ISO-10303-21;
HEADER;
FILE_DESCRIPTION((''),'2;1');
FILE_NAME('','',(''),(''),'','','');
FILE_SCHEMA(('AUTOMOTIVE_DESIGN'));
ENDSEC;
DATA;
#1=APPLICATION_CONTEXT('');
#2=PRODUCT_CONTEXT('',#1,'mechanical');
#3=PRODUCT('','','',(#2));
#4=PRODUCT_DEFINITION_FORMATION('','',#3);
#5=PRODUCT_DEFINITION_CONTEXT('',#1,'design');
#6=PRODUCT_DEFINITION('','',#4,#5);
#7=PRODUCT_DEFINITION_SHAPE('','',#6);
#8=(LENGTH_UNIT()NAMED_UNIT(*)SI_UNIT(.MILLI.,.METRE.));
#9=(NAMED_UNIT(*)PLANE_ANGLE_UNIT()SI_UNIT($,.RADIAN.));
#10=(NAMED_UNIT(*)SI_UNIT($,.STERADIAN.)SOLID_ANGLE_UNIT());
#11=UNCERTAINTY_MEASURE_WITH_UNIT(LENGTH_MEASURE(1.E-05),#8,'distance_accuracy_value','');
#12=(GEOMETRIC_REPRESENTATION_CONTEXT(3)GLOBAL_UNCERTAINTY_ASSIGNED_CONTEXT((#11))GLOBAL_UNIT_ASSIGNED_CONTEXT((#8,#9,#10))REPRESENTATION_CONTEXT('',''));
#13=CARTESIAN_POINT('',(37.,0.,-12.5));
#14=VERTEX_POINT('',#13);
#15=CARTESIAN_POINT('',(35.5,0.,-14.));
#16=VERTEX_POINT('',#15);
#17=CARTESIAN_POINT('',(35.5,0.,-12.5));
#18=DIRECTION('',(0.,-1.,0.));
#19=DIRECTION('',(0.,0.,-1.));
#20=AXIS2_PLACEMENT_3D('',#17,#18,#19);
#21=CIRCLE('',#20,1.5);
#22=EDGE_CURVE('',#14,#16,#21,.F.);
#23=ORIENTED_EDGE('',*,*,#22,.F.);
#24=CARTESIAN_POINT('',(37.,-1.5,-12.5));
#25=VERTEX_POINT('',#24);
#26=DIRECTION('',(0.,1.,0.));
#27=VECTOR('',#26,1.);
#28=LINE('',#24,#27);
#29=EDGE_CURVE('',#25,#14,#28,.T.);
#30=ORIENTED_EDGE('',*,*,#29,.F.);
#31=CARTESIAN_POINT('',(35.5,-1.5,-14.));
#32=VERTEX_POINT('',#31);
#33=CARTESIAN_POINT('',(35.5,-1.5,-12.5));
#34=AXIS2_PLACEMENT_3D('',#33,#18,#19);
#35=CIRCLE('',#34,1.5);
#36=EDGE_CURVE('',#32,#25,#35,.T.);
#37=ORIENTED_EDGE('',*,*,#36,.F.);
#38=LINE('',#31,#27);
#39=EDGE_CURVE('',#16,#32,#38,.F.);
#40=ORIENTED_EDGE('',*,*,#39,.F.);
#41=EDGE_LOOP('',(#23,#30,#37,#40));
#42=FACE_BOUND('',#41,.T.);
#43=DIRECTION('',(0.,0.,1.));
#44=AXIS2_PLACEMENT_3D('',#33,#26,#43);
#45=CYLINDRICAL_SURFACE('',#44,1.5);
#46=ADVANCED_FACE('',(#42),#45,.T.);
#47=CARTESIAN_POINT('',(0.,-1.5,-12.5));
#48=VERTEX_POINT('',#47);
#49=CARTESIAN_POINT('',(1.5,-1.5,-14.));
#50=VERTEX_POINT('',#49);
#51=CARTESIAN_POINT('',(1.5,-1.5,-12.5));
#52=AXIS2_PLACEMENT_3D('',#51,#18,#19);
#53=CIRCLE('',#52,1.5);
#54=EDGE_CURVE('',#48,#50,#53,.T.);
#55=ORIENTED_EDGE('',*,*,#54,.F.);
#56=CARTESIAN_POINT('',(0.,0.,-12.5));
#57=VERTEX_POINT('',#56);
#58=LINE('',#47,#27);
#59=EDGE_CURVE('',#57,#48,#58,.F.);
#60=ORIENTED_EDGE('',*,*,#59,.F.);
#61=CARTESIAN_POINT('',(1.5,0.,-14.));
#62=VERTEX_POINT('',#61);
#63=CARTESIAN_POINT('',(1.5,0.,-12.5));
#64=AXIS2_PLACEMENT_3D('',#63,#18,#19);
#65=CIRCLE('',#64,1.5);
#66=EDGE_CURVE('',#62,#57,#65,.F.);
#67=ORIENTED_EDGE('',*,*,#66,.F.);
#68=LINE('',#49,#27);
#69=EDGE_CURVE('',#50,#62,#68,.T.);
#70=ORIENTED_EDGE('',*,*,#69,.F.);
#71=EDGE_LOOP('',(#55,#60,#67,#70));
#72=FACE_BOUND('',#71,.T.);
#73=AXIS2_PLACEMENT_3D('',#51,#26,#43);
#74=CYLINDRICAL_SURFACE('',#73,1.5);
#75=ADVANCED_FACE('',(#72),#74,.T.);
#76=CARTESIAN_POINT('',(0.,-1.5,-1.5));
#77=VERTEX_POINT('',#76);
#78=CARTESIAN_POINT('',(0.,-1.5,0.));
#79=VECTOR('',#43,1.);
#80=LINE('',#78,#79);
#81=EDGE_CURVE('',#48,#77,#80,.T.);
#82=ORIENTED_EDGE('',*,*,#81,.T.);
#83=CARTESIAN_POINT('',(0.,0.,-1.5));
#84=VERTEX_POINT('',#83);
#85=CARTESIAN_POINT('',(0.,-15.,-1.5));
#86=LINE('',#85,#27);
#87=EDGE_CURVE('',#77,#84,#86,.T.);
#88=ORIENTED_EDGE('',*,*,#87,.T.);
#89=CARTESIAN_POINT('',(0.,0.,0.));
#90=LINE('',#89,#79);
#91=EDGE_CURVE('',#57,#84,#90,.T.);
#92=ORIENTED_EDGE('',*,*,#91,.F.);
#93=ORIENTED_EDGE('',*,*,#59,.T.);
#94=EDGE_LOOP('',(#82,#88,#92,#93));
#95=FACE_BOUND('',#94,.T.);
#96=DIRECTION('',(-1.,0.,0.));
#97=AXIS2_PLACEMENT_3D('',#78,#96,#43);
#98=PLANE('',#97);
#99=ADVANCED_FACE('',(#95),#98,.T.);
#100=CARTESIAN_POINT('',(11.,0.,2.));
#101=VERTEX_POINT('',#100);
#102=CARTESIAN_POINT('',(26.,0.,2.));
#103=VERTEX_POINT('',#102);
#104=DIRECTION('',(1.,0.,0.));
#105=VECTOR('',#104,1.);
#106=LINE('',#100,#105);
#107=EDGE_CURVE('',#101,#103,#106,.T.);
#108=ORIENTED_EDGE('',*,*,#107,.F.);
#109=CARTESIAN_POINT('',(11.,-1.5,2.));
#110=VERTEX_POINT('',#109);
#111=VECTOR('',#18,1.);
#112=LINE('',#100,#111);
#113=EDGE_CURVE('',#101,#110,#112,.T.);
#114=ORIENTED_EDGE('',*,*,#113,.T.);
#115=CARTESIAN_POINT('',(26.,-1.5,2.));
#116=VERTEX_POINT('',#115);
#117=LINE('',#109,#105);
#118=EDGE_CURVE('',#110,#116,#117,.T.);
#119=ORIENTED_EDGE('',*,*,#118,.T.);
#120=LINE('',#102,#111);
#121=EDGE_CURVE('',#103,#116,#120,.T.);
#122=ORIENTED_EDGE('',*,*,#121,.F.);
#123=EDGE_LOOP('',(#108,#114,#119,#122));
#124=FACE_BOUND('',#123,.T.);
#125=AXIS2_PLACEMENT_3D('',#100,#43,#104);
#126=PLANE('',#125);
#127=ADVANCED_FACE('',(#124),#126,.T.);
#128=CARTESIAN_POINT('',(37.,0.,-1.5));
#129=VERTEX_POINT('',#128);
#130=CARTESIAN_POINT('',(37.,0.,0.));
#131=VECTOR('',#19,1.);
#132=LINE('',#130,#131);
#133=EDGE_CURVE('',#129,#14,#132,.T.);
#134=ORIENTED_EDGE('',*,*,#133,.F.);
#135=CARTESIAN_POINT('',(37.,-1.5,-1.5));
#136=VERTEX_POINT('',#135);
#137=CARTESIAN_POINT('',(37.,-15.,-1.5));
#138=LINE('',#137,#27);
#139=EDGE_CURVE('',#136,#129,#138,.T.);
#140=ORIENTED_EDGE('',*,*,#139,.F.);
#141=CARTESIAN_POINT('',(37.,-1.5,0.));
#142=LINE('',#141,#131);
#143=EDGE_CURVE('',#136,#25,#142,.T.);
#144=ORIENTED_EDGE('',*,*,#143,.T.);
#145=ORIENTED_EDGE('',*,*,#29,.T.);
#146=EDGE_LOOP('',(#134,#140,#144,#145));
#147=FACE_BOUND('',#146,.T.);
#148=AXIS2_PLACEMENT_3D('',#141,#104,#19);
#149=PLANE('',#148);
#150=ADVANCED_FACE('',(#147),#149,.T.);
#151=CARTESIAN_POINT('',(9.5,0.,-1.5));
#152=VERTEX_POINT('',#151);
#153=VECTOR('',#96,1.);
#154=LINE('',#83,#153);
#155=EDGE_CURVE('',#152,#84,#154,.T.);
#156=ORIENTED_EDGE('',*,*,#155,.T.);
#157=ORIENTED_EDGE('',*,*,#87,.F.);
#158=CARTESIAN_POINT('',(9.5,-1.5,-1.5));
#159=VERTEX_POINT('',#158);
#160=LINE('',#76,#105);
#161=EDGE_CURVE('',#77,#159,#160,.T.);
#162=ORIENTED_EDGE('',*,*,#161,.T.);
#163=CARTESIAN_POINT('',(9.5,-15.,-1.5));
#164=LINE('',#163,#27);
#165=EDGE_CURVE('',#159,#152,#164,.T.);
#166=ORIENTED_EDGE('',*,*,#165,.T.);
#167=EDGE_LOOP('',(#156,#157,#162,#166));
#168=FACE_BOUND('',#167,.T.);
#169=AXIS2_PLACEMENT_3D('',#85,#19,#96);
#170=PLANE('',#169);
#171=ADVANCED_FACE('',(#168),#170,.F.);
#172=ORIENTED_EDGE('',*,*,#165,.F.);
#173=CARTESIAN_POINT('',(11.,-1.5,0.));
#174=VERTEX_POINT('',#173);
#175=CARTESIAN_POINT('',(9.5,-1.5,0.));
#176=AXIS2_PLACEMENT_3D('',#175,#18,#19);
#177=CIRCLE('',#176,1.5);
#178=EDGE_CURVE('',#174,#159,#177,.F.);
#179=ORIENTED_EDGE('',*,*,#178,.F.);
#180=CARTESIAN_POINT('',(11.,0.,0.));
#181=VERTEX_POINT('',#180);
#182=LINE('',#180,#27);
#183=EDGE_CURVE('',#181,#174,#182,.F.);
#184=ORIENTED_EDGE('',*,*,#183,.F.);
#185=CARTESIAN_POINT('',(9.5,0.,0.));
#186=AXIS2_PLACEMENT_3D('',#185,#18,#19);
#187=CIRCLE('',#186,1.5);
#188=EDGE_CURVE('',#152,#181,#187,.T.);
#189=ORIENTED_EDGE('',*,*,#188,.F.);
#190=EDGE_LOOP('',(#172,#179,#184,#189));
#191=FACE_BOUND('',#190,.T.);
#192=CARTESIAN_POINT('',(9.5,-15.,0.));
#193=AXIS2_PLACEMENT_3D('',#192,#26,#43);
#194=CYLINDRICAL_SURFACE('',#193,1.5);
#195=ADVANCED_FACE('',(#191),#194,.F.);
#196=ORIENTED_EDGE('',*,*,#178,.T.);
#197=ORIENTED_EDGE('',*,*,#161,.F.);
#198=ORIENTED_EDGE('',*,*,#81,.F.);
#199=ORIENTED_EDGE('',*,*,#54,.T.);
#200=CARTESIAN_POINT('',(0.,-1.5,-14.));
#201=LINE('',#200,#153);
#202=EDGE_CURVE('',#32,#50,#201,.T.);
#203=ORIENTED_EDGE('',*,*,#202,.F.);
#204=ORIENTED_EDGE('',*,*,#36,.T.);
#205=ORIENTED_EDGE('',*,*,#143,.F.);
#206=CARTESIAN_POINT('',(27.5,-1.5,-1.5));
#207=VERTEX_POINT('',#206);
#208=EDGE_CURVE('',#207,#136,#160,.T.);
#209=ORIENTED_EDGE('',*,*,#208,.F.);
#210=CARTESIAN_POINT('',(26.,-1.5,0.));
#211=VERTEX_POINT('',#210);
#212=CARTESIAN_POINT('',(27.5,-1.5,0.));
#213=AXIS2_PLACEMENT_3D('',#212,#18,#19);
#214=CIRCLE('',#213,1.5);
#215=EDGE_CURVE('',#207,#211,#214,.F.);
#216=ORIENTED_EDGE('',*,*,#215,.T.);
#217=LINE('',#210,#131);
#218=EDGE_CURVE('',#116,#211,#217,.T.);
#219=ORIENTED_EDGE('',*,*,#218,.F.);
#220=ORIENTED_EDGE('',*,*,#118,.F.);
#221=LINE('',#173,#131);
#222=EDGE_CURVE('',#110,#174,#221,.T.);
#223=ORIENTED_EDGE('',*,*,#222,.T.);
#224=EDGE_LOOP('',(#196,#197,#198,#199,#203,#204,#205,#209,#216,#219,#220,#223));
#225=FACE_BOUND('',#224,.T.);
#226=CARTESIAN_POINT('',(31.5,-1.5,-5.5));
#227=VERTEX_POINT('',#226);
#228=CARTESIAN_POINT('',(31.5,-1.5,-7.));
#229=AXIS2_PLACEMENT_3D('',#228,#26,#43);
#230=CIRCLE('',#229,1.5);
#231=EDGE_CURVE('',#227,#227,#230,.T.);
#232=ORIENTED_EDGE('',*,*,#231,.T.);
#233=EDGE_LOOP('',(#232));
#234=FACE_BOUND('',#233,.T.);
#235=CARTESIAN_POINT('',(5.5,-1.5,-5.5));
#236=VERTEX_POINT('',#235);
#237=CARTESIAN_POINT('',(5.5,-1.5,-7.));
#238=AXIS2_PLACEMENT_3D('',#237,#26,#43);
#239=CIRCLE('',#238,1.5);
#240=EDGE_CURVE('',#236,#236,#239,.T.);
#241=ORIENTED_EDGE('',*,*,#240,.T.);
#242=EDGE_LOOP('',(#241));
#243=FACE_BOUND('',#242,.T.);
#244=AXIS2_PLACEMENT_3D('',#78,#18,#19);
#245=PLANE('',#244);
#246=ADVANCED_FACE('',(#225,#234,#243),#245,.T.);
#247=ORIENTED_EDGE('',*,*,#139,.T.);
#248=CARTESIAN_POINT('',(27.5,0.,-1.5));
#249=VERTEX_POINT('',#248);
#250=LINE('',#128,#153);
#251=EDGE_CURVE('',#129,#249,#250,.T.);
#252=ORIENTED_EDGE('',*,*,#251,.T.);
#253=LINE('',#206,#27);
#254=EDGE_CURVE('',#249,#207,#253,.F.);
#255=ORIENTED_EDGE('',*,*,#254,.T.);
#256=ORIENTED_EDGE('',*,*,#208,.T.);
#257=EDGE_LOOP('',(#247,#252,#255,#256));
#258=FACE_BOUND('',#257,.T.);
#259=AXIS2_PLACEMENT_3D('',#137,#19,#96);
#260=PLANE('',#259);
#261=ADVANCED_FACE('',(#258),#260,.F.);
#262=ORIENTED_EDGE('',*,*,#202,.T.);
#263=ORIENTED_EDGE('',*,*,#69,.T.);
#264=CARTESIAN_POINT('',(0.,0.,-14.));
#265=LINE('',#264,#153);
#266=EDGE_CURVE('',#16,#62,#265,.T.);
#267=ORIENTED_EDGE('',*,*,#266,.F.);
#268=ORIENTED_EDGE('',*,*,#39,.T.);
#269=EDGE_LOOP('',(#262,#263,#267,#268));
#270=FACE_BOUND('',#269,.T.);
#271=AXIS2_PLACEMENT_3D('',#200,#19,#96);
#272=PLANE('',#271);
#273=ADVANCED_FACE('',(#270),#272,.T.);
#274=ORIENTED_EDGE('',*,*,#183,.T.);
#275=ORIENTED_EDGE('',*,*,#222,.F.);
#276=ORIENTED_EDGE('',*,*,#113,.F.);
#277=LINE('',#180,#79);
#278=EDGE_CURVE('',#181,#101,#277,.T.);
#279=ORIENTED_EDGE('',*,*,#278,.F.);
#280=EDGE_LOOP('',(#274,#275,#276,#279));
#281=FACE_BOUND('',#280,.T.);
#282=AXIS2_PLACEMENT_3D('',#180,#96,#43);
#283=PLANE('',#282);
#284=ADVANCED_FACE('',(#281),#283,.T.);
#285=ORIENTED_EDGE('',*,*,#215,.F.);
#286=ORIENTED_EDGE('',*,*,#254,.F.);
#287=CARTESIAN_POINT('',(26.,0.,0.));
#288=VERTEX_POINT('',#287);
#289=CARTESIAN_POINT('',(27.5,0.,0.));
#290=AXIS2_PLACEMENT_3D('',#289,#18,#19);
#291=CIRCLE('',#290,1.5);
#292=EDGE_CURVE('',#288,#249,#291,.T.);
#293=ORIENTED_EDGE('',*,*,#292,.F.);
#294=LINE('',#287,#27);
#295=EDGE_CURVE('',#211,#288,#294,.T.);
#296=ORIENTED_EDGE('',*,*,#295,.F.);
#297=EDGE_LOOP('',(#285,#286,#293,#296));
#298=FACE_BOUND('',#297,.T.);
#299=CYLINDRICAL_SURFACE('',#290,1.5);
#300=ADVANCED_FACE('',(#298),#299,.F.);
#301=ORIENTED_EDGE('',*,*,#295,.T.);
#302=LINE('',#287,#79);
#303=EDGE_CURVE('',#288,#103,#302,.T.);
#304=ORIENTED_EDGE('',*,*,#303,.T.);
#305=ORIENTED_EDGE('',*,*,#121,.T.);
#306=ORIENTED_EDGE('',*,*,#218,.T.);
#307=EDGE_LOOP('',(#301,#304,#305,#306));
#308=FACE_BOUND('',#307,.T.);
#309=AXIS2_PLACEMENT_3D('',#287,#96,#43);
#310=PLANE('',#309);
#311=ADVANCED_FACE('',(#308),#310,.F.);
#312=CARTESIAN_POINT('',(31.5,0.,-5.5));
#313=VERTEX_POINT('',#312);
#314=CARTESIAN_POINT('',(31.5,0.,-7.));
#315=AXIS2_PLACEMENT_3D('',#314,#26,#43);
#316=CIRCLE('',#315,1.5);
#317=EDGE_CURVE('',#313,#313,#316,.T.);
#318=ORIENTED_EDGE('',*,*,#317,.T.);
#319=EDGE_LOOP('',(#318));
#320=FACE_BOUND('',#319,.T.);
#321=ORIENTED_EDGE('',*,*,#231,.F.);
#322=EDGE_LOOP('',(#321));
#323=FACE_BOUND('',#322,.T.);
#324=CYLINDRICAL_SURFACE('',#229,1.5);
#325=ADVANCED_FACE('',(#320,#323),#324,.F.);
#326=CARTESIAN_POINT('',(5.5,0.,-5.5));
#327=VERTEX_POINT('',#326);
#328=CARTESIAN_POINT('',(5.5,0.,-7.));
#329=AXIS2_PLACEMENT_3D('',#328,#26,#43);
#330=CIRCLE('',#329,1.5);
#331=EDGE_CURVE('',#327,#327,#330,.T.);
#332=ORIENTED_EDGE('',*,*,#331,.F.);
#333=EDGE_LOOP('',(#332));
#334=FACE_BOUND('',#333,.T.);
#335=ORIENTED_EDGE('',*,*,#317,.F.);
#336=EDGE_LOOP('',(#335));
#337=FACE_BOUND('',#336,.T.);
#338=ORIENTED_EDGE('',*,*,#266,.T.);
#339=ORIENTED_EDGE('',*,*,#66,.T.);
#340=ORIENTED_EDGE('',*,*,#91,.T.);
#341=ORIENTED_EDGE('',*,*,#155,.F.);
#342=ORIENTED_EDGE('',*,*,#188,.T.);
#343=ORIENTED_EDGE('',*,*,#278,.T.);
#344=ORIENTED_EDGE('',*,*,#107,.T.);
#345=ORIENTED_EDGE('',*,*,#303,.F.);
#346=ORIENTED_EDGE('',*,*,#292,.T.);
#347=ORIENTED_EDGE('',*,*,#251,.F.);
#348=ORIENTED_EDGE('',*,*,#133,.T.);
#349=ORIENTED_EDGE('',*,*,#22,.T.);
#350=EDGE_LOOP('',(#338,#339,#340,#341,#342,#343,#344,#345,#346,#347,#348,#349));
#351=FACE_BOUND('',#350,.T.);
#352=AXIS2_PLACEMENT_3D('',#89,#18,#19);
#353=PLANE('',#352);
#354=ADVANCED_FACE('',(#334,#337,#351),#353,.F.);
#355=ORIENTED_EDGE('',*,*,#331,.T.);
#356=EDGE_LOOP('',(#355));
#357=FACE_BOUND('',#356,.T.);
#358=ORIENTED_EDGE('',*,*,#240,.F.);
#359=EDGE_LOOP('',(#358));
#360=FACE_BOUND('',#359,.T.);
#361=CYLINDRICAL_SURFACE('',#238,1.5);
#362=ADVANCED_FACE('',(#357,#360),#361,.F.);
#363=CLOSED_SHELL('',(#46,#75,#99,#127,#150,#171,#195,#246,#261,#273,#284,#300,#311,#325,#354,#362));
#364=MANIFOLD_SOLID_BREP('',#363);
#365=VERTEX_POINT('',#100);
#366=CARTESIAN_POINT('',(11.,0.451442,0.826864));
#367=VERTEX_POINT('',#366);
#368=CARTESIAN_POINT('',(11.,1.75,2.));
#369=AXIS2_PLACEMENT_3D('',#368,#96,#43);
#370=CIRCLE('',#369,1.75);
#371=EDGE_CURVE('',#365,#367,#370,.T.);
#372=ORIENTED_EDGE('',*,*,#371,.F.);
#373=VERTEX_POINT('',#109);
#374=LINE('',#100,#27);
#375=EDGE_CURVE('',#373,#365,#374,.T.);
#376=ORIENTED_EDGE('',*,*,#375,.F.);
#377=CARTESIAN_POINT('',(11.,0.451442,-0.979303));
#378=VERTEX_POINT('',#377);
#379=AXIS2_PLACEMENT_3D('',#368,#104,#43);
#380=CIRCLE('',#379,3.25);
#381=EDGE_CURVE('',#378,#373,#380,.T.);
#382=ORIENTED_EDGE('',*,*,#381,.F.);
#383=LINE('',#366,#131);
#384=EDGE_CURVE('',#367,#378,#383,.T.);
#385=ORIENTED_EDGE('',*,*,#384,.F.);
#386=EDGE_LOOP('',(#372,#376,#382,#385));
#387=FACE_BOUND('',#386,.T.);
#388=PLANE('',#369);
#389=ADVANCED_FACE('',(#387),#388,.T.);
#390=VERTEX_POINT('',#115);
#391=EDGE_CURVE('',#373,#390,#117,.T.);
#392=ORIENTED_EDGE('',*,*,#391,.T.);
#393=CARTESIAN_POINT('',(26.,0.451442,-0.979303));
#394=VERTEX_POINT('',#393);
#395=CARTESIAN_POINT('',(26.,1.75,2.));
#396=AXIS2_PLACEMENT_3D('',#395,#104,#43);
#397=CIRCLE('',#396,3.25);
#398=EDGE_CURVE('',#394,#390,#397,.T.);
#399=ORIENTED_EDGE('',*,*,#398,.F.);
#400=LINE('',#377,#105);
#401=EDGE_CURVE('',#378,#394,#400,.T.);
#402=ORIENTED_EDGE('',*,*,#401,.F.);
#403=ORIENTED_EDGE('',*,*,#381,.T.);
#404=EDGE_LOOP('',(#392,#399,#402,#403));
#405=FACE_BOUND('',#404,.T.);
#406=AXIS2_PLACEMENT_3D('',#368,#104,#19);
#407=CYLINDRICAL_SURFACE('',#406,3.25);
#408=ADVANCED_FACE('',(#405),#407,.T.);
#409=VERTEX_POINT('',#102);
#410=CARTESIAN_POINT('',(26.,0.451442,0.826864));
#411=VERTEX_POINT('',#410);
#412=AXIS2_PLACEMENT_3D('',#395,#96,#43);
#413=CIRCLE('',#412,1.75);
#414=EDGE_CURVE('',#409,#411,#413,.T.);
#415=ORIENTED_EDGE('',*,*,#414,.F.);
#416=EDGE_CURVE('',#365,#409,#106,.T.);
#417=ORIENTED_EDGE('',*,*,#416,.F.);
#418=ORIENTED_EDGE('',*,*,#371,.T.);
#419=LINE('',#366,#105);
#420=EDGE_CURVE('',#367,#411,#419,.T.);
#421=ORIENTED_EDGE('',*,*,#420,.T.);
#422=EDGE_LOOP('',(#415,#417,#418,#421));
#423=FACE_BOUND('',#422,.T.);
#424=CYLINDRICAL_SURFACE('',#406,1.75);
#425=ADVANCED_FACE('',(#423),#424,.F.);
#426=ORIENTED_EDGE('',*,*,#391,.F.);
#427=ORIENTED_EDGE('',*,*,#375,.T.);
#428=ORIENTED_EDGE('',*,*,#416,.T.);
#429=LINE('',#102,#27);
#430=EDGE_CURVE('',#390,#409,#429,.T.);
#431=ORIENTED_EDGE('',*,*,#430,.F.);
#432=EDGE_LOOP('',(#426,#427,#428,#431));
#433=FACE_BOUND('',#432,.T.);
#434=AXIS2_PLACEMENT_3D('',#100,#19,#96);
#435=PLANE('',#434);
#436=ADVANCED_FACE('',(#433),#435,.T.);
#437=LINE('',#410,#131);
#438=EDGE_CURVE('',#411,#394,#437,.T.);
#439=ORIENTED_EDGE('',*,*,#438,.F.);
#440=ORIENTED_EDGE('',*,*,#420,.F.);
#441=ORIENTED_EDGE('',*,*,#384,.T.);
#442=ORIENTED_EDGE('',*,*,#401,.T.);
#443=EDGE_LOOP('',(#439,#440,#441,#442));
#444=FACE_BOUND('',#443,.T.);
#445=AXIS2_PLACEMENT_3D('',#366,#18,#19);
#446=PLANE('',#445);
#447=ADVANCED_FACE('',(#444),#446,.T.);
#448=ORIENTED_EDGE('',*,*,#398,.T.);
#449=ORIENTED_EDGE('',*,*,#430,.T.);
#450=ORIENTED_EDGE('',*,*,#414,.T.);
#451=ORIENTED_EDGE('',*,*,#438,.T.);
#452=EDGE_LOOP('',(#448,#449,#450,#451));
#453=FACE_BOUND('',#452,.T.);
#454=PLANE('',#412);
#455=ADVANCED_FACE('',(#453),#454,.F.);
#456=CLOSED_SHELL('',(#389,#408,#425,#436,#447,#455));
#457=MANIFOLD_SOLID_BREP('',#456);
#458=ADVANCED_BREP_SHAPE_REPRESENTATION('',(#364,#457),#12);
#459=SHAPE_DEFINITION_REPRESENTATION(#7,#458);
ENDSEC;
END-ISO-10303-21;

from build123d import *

# Parameters (mm, degrees)
SKETCH_1_W             = 37
SKETCH_1_H             = 14
SKETCH_1_R             = 1.5
SM_BASE_FLANGE_1_DEPTH = 1.5
SKETCH_7_W             = 2
SKETCH_7_H             = 1.5
EXTRUDE_1_DEPTH        = 15
SM_BASE_FLANGE_2_DEPTH = 15
SKETCH_11_W            = 11
SKETCH_11_H            = 1.5
CUT_EXTRUDE_1_DEPTH    = 15
FILLET_1_R             = 1.5
FILLET_2_R             = 1.5


# Sheet-metal steps are written as plain solids
with BuildPart() as part:
    # Sketch 1 → 基体-法兰1 (new body)
    with BuildSketch(Plane(origin=(0, 0, 0), x_dir=(1, 0, 0), z_dir=(0, 1, 0))):
        with Locations((18.5, 7)):
            Rectangle(SKETCH_1_W, SKETCH_1_H)
        with Locations(Location((5.5, 7, 0), (0, 0, 270))):
            Circle(SKETCH_1_R, mode=Mode.SUBTRACT)
        with Locations(Location((31.5, 7, 0), (0, 0, 270))):
            Circle(SKETCH_1_R, mode=Mode.SUBTRACT)
    extrude(amount=-SM_BASE_FLANGE_1_DEPTH)

    # 草图7 → 凸台-拉伸1 (add)
    with BuildSketch(Plane(origin=(26, 0, 0), x_dir=(0, 0, -1), z_dir=(1, 0, 0))):
        with Locations((-1, -0.75)):
            Rectangle(SKETCH_7_W, SKETCH_7_H)
    extrude(amount=-EXTRUDE_1_DEPTH)

    # 草图11 → 切除-拉伸1 (cut)
    with BuildSketch(Plane(origin=(0, 0, 0), x_dir=(1, 0, 0), z_dir=(0, 1, 0))):
        with Locations((5.5, 0.75)):
            Rectangle(SKETCH_11_W, SKETCH_11_H)
        with Locations((31.5, 0.75)):
            Rectangle(SKETCH_11_W, SKETCH_11_H)
    extrude(amount=-CUT_EXTRUDE_1_DEPTH, mode=Mode.SUBTRACT)

    # 圆角1
    fillet_1_edges = [part.edges().sort_by_distance(p)[0] for p in [
        (0, -0.75, -14),
        (37, -0.75, -14),
    ]]
    fillet(fillet_1_edges, radius=FILLET_1_R)

    # 圆角2
    fillet_2_edges = [part.edges().sort_by_distance(p)[0] for p in [
        (11, -0.75, -1.5),
        (26, -0.75, -1.5),
    ]]
    fillet(fillet_2_edges, radius=FILLET_2_R)


with BuildPart() as body_2:
    # 草图8 → 基体-法兰2 (new body)
    with BuildSketch(Plane(origin=(26, 0, 0), x_dir=(0, 0, -1), z_dir=(1, 0, 0))):
        with BuildLine():
            Line((-0.826864003, 0.451442364), (0.979303286, 0.451442364))
            ThreePointArc((0.979303286, 0.451442364), (-3.780756536, 4.468714063), (-2, -1.5))
            Line((-2, -1.5), (-2, 0))
            ThreePointArc((-2, 0), (-3.75, 1.75), (-2, 3.5))
            ThreePointArc((-2, 3.5), (-0.366755398, 2.378499856), (-0.826864003, 0.451442364))
        make_face()
    extrude(amount=-SM_BASE_FLANGE_2_DEPTH)


solid = Compound([part.part, body_2.part])
